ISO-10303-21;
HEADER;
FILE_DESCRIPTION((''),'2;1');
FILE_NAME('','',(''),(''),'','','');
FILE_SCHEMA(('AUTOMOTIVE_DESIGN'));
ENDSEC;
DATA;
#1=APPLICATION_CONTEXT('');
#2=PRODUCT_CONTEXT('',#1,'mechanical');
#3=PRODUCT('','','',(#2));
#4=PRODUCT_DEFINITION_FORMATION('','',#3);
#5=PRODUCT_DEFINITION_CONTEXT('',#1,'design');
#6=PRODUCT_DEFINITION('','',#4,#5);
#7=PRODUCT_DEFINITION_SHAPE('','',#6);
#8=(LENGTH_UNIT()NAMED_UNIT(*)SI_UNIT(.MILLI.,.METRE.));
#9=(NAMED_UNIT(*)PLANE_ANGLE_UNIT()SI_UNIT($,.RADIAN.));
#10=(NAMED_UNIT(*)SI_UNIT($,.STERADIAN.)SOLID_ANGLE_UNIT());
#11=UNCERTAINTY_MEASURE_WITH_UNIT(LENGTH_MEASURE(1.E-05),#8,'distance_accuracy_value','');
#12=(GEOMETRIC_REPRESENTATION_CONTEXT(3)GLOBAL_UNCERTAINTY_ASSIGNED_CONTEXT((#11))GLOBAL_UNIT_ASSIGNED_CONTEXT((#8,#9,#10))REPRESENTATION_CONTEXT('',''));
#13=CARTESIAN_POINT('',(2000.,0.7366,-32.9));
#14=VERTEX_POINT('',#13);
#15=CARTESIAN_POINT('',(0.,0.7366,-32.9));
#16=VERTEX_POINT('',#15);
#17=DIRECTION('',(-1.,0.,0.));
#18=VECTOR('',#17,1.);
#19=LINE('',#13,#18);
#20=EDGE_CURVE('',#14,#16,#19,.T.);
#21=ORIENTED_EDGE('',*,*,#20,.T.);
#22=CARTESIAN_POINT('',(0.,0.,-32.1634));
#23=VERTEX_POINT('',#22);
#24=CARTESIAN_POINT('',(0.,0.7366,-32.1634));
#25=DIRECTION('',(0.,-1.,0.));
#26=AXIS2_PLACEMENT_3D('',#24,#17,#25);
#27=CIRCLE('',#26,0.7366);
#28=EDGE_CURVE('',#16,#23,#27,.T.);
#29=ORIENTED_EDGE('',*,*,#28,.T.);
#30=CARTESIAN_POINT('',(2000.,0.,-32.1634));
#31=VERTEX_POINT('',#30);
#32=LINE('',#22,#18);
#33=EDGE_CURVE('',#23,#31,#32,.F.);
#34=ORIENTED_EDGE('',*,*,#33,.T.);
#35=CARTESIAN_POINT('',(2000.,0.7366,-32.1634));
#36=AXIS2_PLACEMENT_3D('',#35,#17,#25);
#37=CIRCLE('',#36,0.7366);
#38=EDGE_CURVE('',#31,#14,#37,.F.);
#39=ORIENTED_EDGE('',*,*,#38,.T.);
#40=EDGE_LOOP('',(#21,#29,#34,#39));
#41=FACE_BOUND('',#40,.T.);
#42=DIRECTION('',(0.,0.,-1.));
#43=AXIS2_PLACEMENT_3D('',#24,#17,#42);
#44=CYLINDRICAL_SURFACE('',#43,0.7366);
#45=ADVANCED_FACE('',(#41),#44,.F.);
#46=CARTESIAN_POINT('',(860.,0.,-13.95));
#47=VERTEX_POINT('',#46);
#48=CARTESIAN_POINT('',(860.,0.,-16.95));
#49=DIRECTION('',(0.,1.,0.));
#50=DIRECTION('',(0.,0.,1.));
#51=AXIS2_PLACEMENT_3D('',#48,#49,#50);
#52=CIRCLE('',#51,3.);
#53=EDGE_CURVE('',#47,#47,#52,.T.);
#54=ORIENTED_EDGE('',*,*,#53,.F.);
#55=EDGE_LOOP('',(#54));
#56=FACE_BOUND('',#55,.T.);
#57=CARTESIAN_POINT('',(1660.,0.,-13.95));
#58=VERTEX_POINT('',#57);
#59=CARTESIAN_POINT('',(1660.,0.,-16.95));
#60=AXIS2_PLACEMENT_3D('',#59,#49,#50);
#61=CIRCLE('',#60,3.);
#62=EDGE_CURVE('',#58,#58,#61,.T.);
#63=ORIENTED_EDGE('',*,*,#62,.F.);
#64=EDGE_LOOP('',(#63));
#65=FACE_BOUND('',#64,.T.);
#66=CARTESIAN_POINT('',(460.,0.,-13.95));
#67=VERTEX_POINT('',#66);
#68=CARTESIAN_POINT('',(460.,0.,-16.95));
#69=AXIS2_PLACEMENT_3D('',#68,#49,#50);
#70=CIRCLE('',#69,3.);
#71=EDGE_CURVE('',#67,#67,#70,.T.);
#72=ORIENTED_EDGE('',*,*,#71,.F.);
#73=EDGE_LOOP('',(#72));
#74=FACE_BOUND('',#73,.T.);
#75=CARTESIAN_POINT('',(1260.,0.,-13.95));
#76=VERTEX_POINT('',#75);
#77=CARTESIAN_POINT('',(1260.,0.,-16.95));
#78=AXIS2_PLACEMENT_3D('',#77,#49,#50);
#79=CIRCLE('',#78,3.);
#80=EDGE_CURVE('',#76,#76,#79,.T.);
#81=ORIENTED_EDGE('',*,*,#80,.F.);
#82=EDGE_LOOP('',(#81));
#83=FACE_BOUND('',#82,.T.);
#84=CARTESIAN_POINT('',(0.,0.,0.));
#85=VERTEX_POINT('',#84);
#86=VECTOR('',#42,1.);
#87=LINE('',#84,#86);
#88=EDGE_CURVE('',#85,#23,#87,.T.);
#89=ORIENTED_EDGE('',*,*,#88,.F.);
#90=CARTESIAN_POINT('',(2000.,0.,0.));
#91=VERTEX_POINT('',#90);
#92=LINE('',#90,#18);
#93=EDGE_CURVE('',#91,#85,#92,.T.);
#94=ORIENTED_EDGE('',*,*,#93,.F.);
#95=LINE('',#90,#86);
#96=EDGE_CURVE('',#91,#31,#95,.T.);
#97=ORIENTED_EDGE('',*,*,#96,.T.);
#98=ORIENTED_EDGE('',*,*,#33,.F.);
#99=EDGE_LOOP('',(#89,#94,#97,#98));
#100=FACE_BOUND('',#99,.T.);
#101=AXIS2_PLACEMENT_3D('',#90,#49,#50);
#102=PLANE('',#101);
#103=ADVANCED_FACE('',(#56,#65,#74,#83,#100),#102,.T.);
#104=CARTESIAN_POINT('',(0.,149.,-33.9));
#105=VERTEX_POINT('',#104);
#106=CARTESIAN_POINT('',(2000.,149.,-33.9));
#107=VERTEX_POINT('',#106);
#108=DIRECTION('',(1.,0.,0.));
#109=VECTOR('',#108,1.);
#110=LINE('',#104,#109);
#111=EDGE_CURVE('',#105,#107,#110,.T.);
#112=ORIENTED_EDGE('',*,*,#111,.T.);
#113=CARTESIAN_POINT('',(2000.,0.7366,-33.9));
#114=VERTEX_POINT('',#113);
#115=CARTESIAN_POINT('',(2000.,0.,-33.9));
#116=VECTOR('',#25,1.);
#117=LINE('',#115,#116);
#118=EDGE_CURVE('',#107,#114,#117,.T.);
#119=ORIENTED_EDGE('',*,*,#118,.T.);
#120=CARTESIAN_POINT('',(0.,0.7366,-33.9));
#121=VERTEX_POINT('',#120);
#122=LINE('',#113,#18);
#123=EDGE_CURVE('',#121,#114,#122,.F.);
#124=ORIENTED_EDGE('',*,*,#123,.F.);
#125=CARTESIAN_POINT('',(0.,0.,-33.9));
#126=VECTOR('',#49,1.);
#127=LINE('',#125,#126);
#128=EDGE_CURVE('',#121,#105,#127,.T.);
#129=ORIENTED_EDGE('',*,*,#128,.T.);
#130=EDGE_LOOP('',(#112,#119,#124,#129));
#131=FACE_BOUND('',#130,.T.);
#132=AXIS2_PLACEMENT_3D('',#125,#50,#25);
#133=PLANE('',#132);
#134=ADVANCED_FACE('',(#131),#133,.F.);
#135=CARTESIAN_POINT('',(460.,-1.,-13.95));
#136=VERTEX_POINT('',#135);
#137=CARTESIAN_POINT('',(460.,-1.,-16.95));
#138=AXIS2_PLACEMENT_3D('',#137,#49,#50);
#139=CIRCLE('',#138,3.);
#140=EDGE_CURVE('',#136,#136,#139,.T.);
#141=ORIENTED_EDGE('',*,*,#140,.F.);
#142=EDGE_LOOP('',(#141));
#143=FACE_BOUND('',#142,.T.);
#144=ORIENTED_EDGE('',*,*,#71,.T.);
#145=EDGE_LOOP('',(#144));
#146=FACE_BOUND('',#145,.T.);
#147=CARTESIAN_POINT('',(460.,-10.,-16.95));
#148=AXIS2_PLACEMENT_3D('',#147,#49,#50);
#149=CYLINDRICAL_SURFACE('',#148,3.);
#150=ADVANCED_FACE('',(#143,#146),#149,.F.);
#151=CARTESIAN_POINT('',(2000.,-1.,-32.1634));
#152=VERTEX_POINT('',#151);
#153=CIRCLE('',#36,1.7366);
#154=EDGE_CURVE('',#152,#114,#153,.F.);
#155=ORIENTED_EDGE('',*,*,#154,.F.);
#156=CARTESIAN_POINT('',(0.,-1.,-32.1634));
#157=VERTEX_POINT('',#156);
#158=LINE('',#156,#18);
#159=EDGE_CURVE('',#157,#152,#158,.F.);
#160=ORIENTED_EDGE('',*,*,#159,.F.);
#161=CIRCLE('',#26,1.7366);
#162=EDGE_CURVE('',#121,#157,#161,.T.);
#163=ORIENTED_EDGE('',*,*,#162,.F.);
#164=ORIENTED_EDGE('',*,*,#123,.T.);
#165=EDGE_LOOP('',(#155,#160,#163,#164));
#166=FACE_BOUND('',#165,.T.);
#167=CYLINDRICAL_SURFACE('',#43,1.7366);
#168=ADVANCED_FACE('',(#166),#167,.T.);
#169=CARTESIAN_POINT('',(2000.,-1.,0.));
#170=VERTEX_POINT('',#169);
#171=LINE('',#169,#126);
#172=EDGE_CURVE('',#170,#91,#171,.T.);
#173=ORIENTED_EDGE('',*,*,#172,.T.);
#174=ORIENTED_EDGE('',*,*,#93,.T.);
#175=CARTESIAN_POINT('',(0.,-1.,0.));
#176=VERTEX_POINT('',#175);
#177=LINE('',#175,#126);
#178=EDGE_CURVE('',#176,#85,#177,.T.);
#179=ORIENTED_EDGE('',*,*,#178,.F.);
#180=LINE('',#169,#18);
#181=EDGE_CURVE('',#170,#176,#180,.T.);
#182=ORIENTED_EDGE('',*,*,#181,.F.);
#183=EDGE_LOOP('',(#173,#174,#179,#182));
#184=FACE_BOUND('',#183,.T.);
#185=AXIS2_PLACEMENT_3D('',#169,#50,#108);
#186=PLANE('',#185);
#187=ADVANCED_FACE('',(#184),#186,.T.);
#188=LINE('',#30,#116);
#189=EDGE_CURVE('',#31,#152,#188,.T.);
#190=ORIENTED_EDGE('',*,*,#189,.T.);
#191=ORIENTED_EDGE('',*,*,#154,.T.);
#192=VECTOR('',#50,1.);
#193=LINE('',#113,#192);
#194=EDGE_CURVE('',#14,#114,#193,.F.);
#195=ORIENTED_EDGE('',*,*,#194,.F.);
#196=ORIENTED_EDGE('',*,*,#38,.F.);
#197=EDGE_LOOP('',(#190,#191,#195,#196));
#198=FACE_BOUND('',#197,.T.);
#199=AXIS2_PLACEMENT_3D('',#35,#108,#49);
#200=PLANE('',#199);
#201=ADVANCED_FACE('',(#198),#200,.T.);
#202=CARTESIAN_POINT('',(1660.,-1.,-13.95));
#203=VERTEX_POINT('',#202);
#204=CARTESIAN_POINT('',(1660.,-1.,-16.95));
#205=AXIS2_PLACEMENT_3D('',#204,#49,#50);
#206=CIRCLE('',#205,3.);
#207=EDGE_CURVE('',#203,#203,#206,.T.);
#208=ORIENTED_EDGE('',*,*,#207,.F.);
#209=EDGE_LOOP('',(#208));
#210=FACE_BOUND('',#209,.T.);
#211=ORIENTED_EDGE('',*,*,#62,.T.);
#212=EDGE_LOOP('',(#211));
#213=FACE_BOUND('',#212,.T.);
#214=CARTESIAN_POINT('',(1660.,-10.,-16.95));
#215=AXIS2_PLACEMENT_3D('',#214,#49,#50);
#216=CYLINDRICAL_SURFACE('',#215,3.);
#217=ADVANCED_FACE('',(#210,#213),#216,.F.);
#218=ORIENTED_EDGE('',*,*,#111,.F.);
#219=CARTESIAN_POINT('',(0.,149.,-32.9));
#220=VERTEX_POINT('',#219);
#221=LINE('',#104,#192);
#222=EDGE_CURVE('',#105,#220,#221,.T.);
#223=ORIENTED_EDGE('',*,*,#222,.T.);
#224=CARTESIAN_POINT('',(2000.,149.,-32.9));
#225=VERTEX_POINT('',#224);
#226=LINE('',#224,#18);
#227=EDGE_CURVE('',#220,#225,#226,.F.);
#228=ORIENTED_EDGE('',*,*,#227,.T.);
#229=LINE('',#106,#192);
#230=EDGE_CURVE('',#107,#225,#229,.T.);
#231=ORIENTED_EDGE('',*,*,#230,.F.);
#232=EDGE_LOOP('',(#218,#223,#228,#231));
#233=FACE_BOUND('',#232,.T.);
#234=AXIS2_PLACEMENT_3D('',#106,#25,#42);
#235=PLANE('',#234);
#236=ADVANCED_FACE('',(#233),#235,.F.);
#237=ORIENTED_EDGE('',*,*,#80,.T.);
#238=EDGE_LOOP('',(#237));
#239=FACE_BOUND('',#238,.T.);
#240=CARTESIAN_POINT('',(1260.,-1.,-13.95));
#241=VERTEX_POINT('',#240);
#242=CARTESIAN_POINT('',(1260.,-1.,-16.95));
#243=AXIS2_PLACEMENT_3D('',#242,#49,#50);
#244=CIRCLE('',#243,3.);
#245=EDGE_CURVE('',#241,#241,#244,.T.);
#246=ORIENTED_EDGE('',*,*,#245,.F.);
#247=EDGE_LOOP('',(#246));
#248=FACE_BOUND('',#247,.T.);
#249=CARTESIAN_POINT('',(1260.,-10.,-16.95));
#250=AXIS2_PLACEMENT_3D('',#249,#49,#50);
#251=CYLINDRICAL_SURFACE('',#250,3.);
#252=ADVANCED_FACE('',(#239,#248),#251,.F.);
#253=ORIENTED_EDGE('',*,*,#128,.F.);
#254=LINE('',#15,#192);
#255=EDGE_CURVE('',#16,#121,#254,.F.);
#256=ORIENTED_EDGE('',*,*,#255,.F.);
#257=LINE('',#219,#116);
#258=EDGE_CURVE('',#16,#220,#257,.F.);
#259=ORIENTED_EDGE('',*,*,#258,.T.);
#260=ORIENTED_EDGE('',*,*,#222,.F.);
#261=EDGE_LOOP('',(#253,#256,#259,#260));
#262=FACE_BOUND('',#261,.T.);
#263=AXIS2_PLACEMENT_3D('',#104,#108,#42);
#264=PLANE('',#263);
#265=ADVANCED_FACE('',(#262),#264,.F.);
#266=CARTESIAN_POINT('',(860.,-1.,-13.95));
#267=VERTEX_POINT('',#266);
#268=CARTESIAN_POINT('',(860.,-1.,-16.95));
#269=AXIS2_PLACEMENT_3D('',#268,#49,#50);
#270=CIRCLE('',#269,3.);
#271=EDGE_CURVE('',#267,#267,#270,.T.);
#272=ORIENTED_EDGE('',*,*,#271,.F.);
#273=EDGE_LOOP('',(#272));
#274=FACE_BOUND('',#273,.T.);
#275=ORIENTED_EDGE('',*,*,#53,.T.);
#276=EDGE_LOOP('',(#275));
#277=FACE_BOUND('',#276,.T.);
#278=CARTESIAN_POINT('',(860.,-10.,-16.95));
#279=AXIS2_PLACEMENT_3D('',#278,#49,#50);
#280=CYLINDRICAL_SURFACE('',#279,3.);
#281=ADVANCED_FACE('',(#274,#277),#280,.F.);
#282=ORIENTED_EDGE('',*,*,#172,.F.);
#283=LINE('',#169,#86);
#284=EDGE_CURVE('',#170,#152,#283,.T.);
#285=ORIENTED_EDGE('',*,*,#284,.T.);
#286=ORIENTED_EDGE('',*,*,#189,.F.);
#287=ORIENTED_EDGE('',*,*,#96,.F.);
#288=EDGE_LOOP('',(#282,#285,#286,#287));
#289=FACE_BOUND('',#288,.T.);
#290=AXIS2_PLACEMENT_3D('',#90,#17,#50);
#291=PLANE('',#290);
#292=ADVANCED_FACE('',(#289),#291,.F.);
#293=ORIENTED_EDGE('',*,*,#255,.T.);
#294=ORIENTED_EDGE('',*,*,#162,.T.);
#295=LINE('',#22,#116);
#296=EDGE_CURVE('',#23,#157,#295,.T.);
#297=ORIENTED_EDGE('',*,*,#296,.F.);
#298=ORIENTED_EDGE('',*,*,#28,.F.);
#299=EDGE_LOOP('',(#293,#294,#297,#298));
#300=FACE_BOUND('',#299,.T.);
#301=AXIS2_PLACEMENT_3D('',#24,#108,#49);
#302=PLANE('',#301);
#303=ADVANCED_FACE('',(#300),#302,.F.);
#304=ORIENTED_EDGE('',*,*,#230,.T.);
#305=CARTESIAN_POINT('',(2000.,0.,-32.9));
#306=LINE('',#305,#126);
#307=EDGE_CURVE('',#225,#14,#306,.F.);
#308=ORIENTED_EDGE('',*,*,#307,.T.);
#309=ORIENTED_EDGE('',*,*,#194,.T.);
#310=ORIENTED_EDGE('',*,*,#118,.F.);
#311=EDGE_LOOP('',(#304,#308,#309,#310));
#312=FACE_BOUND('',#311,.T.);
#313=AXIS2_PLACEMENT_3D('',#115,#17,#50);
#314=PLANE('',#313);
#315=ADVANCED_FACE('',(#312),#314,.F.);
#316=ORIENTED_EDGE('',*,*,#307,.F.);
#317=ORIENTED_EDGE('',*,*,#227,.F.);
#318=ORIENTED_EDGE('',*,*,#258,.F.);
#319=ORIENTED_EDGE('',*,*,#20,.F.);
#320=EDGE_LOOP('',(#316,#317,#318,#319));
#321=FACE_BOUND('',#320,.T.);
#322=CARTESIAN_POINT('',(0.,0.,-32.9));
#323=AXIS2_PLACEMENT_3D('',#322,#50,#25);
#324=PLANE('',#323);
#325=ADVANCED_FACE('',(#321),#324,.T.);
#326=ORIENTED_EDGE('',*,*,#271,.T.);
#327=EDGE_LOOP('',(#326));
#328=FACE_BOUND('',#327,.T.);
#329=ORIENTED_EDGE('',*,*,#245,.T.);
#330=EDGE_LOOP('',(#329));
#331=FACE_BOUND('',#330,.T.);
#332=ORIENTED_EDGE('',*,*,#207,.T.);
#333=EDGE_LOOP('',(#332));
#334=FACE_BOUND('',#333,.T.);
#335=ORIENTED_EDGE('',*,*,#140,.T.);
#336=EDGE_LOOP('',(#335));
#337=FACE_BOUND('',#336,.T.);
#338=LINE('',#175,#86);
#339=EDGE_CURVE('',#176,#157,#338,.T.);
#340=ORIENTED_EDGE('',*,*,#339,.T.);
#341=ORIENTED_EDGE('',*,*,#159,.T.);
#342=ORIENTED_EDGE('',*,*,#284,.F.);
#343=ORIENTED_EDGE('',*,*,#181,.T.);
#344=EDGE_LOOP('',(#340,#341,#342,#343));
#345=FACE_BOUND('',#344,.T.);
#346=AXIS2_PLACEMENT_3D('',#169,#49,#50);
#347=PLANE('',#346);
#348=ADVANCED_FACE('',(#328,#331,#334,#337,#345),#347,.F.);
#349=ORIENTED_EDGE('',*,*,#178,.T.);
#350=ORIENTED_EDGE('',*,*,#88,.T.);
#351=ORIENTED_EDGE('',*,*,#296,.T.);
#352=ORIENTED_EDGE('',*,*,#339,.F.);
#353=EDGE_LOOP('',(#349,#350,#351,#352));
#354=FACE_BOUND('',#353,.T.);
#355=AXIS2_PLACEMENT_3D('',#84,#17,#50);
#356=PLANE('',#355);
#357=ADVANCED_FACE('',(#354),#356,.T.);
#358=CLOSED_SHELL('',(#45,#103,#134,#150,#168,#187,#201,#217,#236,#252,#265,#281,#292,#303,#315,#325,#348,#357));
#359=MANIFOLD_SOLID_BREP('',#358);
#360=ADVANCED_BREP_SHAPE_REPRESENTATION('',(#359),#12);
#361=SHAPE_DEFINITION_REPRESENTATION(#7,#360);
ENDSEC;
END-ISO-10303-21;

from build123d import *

# Parameters (mm, degrees)
SKETCH2_W                    = 33.9
SKETCH2_H                    = 1
BASE_FLANGE1_DEPTH           = 2000
EDGE_FLANGE2_STRIP_W         = 5.4732
EDGE_FLANGE2_STRIP_H         = 1
EDGE_FLANGE2_STRIP_CUT_DEPTH = 2000
EDGE_FLANGE2_DEPTH           = 2000
SKETCH10_R                   = 3
CUT_EXTRUDE1_DEPTH           = 10
SKETCH10_3_R                 = 3
CUT_EXTRUDE2_DEPTH           = 10


# Sheet-metal steps are written as plain solids
with BuildPart() as part:
    # Sketch2 → Base-Flange1 (new body)
    with BuildSketch(Plane(origin=(0, 0, 0), x_dir=(0, 0, -1), z_dir=(1, 0, 0))):
        with Locations((16.95, -0.5)):
            Rectangle(SKETCH2_W, SKETCH2_H)
    extrude(amount=BASE_FLANGE1_DEPTH)

    # Edge-Flange2 strip (across the edge) → Edge-Flange2 strip cut (cut)
    with BuildSketch(Plane(origin=(2000, 0, -33.9), x_dir=(0, 0, 1), z_dir=(-1, 0, 0))):
        with Locations((-1, -0.5)):
            Rectangle(EDGE_FLANGE2_STRIP_W, EDGE_FLANGE2_STRIP_H)
    extrude(amount=EDGE_FLANGE2_STRIP_CUT_DEPTH, mode=Mode.SUBTRACT)

    # Edge-Flange2 section (across the edge) → Edge-Flange2 (add)
    with BuildSketch(Plane(origin=(2000, 0, -33.9), x_dir=(0, 0, 1), z_dir=(-1, 0, 0))):
        with BuildLine():
            Line((0, 0.7366), (0, 149))
            Line((0, 149), (1, 149))
            Line((1, 149), (1, 0.7366))
            ThreePointArc((1, 0.7366), (1.215745145, 0.215745145), (1.7366, 0))
            Line((1.7366, 0), (1.7366, -1))
            ThreePointArc((1.7366, -1), (0.508638364, -0.491361636), (0, 0.7366))
        make_face()
    extrude(amount=EDGE_FLANGE2_DEPTH)

    # Sketch10 → Cut-Extrude1 (cut)
    with BuildSketch(Plane(origin=(0, 0, 0), x_dir=(1, 0, 0), z_dir=(0, 1, 0))):
        with Locations(Location((860, 16.95, 0), (0, 0, 270))):
            Circle(SKETCH10_R)
    extrude(amount=-CUT_EXTRUDE1_DEPTH, mode=Mode.SUBTRACT)

    # Sketch10<3> → Cut-Extrude2 (cut)
    with BuildSketch(Plane(origin=(0, 0, 0), x_dir=(1, 0, 0), z_dir=(0, 1, 0))):
        with Locations(Location((460, 16.95, 0), (0, 0, 270))):
            Circle(SKETCH10_3_R)
        with Locations(Location((860, 16.95, 0), (0, 0, 270))):
            Circle(SKETCH10_3_R)
        with Locations(Location((1260, 16.95, 0), (0, 0, 270))):
            Circle(SKETCH10_3_R)
        with Locations(Location((1660, 16.95, 0), (0, 0, 270))):
            Circle(SKETCH10_3_R)
    extrude(amount=-CUT_EXTRUDE2_DEPTH, mode=Mode.SUBTRACT)


solid = part.part
